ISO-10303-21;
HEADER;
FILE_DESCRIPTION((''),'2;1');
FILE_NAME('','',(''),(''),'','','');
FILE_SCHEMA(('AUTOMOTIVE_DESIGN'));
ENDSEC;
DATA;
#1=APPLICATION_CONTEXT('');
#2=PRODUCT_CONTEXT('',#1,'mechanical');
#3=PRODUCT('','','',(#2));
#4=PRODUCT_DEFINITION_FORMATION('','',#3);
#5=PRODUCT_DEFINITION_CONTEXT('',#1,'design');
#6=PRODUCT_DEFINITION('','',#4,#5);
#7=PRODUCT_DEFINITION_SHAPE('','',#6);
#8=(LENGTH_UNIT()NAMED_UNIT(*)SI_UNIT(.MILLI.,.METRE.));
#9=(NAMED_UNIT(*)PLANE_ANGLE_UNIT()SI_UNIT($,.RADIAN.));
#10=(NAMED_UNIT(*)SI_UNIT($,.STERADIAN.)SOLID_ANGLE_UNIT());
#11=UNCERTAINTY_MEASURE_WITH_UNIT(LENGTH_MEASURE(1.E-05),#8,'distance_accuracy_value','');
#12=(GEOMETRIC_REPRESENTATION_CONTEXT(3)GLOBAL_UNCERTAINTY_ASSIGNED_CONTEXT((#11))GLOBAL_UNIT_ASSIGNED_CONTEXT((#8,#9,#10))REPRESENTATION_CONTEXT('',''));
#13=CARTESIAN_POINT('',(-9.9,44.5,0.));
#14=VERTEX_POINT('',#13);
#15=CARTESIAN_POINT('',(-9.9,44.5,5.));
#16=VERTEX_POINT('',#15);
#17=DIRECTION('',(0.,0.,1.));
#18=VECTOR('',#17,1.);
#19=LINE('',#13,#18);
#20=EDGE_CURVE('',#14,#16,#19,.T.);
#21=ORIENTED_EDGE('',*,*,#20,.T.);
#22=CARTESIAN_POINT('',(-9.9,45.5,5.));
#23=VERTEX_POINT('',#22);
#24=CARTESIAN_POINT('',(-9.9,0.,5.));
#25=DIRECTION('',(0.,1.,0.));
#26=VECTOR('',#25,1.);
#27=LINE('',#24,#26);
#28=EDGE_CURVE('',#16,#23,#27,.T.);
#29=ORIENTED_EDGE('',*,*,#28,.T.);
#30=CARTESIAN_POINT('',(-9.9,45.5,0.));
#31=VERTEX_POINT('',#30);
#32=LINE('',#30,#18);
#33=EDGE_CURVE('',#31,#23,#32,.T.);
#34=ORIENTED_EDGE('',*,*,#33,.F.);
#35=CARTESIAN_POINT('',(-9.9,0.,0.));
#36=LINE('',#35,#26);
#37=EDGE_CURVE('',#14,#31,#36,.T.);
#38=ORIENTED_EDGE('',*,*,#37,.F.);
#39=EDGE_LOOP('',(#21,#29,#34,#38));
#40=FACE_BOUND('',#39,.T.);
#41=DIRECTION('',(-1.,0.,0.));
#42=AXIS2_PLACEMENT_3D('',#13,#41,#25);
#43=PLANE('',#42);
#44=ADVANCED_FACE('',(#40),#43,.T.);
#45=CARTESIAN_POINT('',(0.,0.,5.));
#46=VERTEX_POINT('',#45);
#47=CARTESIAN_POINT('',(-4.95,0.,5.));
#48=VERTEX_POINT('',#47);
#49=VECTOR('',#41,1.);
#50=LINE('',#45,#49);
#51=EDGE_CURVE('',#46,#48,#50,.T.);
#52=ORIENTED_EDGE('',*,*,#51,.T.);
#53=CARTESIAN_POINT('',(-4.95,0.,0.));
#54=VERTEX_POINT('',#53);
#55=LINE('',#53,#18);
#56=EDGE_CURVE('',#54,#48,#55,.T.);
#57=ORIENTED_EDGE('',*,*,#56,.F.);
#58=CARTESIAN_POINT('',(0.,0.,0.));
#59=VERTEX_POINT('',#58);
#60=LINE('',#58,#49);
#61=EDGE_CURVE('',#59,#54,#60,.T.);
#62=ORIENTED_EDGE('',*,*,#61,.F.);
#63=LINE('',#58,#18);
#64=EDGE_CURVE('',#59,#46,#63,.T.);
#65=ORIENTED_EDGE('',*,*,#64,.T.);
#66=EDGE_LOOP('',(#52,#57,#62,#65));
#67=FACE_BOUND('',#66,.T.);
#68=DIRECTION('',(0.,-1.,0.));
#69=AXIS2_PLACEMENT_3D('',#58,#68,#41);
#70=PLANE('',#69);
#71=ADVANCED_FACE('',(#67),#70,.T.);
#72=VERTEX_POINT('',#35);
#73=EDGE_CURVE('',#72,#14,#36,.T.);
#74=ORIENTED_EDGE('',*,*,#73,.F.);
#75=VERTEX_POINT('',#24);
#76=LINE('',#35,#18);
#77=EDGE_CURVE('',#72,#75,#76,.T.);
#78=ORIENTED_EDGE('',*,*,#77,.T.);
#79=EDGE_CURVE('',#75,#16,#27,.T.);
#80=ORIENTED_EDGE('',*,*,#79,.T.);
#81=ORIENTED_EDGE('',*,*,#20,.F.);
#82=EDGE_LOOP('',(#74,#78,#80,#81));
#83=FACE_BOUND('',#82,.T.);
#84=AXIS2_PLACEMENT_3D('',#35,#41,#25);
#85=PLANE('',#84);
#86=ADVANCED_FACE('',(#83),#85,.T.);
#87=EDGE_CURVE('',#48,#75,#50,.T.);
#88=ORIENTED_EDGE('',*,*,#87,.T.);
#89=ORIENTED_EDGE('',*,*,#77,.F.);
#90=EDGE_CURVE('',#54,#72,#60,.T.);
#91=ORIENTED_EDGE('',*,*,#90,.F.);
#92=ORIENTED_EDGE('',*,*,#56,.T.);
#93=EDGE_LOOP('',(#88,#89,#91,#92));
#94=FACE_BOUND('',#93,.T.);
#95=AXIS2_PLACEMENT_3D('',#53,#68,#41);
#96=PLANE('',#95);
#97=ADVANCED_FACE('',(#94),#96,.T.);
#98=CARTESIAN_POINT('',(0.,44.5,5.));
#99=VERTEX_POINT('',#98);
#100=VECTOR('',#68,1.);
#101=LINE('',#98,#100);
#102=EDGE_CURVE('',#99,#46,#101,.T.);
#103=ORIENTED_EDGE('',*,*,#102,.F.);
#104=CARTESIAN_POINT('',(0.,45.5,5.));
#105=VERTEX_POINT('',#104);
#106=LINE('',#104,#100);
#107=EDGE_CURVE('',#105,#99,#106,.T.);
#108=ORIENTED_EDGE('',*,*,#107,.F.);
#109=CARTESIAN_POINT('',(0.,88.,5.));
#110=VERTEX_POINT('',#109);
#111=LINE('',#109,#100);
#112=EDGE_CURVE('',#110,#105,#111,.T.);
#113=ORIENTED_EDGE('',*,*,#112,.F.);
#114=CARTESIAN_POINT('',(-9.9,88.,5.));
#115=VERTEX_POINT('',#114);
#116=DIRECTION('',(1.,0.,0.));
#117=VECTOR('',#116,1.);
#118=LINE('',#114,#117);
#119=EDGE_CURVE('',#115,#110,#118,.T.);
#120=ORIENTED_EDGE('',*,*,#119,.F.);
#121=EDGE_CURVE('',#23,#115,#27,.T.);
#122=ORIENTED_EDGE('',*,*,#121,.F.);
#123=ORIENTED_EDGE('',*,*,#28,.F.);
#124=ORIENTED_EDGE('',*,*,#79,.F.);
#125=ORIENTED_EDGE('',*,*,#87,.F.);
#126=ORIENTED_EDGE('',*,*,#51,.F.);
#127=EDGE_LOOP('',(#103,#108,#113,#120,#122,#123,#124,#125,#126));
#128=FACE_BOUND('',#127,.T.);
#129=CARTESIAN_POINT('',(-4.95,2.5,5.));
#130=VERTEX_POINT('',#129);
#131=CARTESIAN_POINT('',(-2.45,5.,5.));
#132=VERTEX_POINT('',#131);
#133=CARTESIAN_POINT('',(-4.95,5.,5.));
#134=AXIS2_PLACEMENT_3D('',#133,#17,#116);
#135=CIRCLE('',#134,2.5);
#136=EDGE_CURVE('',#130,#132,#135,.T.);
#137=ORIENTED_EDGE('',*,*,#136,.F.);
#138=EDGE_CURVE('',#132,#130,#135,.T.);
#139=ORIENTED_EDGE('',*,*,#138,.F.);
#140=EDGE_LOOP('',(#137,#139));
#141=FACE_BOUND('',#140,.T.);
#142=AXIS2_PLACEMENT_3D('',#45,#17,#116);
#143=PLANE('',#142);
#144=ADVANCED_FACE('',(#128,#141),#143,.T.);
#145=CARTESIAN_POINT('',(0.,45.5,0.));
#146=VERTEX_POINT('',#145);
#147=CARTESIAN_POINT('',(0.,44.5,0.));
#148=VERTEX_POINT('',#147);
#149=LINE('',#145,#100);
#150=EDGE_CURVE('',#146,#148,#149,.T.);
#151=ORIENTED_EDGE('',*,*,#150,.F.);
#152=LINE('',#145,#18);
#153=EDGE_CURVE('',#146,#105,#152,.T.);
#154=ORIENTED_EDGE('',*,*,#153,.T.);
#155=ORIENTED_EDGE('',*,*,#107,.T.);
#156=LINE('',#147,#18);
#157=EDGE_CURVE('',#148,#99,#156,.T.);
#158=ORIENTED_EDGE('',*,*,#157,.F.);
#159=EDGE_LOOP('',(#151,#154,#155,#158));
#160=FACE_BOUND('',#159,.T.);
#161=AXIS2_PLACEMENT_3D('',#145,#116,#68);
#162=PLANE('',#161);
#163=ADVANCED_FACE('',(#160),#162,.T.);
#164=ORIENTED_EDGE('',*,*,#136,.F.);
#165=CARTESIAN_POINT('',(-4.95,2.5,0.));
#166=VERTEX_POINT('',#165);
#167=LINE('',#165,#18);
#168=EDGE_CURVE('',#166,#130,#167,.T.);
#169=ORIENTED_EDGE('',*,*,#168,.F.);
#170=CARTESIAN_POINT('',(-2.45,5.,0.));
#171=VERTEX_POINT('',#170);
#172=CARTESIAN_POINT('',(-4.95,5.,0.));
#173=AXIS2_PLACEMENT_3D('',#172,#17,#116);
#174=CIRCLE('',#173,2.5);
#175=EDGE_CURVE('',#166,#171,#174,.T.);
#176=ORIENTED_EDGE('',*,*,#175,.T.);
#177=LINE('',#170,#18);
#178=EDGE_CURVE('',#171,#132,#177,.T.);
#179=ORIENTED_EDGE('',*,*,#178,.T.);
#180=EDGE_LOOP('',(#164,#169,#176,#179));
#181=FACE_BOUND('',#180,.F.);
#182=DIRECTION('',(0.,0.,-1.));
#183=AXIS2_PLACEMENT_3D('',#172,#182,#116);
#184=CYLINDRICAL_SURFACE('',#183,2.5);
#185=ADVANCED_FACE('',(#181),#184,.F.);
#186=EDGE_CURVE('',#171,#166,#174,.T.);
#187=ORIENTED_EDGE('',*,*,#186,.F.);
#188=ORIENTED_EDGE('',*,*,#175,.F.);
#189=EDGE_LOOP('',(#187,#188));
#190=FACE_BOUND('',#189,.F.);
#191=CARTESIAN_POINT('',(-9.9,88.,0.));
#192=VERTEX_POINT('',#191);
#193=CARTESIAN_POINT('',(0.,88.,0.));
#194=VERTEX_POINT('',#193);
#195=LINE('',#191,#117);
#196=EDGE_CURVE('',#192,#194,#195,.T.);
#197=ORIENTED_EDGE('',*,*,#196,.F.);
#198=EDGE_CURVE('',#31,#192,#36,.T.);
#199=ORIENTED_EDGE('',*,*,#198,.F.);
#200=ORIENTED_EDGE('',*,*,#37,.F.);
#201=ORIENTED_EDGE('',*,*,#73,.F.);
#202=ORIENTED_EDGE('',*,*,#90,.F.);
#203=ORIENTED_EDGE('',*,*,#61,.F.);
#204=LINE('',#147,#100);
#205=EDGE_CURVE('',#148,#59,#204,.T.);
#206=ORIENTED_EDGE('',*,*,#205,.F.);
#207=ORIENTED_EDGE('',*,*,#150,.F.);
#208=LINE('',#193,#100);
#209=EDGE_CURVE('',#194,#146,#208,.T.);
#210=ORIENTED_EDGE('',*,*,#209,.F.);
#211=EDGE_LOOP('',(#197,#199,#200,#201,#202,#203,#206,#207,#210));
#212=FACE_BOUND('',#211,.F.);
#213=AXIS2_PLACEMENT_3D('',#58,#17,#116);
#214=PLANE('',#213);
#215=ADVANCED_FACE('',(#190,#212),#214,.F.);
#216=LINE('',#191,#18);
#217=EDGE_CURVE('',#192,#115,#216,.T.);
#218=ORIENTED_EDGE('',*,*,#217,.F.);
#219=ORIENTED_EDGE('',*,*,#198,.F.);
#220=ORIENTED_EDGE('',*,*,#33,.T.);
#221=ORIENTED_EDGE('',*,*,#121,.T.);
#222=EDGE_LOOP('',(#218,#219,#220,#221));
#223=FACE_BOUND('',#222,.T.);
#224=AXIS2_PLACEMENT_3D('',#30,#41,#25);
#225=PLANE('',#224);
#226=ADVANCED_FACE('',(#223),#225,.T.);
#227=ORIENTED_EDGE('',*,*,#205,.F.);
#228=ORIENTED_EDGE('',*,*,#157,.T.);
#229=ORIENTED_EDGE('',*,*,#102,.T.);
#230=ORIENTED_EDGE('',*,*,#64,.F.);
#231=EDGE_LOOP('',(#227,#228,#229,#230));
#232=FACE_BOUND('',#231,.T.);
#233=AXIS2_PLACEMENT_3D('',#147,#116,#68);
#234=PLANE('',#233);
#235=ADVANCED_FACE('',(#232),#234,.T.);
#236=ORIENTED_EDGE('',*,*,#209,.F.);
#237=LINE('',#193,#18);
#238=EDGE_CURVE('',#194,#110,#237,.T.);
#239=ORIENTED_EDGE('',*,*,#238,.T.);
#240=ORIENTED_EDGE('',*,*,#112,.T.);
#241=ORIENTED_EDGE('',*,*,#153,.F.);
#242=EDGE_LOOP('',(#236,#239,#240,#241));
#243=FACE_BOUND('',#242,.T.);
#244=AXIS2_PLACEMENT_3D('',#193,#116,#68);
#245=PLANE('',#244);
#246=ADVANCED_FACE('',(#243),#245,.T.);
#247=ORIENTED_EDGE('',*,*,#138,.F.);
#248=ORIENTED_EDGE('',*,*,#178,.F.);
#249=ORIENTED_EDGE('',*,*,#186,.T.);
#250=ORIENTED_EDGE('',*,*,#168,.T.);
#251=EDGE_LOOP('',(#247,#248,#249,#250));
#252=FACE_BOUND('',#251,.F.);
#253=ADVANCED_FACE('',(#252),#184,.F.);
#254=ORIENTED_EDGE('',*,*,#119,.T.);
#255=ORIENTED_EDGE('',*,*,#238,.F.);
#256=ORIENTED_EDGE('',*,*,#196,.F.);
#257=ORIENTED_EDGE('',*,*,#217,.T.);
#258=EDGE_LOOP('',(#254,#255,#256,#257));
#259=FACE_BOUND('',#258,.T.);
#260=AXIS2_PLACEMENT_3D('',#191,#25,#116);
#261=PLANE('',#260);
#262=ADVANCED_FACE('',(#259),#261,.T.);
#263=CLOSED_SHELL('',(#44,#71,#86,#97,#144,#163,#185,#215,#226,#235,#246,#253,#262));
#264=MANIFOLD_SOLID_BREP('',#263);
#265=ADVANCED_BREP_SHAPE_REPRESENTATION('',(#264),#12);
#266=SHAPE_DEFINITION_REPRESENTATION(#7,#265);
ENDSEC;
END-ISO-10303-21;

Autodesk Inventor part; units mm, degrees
ref_plane "YZ Plane" through (0, 0, 0) normal (1, 0, 0) x (0, 1, 0)
ref_plane "XZ Plane" through (0, 0, 0) normal (0, 1, 0) x (-1, 0, 0)
ref_plane "XY Plane" through (0, 0, 0) normal (0, 0, 1) x (1, 0, 0)
sketch "Sketch2" plane through (0, 0, 0) normal (0, 0, 1) x (1, 0, 0)
  line L0 (0, 0) -> (-9.9, 0)
  line L1 (-4.95, 0) -> (-4.95, 2.5)
  line L2 (-4.95, 0) -> (-2.45, 0) construction
  circle A0 centre (-4.95, 5) radius 2.5
  line L3 (-4.95, 7.5) -> (32.05, 7.5) construction
  line L4 (0, 44.5) -> (0, 0)
  line L5 (0, 0) -> (-9.9, 0)
  line L6 (-9.9, 0) -> (-9.9, 44.5)
  line L7 (0, 45.5) -> (0, 0)
  line L8 (0, 0) -> (-9.9, 0)
  line L9 (-9.9, 0) -> (-9.9, 45.5)
  line L10 (-4.95, 7.5) -> (66.05, 7.5) construction
  line L11 (0, 0) -> (-9.9, 0)
  line L12 (-9.9, 0) -> (-9.9, 88)
  line L13 (-9.9, 88) -> (0, 88)
  line L14 (0, 88) -> (0, 0)
  dimension "d35" = 5
  dimension "d33" = 2.5
  dimension "d34" = 90
  dimension "d46" = 88
extrude "Extrusion6" add sketch "Sketch2" along normal blind 5
properties part number "Elbow_Cube_Holder_TestFit_V2"
